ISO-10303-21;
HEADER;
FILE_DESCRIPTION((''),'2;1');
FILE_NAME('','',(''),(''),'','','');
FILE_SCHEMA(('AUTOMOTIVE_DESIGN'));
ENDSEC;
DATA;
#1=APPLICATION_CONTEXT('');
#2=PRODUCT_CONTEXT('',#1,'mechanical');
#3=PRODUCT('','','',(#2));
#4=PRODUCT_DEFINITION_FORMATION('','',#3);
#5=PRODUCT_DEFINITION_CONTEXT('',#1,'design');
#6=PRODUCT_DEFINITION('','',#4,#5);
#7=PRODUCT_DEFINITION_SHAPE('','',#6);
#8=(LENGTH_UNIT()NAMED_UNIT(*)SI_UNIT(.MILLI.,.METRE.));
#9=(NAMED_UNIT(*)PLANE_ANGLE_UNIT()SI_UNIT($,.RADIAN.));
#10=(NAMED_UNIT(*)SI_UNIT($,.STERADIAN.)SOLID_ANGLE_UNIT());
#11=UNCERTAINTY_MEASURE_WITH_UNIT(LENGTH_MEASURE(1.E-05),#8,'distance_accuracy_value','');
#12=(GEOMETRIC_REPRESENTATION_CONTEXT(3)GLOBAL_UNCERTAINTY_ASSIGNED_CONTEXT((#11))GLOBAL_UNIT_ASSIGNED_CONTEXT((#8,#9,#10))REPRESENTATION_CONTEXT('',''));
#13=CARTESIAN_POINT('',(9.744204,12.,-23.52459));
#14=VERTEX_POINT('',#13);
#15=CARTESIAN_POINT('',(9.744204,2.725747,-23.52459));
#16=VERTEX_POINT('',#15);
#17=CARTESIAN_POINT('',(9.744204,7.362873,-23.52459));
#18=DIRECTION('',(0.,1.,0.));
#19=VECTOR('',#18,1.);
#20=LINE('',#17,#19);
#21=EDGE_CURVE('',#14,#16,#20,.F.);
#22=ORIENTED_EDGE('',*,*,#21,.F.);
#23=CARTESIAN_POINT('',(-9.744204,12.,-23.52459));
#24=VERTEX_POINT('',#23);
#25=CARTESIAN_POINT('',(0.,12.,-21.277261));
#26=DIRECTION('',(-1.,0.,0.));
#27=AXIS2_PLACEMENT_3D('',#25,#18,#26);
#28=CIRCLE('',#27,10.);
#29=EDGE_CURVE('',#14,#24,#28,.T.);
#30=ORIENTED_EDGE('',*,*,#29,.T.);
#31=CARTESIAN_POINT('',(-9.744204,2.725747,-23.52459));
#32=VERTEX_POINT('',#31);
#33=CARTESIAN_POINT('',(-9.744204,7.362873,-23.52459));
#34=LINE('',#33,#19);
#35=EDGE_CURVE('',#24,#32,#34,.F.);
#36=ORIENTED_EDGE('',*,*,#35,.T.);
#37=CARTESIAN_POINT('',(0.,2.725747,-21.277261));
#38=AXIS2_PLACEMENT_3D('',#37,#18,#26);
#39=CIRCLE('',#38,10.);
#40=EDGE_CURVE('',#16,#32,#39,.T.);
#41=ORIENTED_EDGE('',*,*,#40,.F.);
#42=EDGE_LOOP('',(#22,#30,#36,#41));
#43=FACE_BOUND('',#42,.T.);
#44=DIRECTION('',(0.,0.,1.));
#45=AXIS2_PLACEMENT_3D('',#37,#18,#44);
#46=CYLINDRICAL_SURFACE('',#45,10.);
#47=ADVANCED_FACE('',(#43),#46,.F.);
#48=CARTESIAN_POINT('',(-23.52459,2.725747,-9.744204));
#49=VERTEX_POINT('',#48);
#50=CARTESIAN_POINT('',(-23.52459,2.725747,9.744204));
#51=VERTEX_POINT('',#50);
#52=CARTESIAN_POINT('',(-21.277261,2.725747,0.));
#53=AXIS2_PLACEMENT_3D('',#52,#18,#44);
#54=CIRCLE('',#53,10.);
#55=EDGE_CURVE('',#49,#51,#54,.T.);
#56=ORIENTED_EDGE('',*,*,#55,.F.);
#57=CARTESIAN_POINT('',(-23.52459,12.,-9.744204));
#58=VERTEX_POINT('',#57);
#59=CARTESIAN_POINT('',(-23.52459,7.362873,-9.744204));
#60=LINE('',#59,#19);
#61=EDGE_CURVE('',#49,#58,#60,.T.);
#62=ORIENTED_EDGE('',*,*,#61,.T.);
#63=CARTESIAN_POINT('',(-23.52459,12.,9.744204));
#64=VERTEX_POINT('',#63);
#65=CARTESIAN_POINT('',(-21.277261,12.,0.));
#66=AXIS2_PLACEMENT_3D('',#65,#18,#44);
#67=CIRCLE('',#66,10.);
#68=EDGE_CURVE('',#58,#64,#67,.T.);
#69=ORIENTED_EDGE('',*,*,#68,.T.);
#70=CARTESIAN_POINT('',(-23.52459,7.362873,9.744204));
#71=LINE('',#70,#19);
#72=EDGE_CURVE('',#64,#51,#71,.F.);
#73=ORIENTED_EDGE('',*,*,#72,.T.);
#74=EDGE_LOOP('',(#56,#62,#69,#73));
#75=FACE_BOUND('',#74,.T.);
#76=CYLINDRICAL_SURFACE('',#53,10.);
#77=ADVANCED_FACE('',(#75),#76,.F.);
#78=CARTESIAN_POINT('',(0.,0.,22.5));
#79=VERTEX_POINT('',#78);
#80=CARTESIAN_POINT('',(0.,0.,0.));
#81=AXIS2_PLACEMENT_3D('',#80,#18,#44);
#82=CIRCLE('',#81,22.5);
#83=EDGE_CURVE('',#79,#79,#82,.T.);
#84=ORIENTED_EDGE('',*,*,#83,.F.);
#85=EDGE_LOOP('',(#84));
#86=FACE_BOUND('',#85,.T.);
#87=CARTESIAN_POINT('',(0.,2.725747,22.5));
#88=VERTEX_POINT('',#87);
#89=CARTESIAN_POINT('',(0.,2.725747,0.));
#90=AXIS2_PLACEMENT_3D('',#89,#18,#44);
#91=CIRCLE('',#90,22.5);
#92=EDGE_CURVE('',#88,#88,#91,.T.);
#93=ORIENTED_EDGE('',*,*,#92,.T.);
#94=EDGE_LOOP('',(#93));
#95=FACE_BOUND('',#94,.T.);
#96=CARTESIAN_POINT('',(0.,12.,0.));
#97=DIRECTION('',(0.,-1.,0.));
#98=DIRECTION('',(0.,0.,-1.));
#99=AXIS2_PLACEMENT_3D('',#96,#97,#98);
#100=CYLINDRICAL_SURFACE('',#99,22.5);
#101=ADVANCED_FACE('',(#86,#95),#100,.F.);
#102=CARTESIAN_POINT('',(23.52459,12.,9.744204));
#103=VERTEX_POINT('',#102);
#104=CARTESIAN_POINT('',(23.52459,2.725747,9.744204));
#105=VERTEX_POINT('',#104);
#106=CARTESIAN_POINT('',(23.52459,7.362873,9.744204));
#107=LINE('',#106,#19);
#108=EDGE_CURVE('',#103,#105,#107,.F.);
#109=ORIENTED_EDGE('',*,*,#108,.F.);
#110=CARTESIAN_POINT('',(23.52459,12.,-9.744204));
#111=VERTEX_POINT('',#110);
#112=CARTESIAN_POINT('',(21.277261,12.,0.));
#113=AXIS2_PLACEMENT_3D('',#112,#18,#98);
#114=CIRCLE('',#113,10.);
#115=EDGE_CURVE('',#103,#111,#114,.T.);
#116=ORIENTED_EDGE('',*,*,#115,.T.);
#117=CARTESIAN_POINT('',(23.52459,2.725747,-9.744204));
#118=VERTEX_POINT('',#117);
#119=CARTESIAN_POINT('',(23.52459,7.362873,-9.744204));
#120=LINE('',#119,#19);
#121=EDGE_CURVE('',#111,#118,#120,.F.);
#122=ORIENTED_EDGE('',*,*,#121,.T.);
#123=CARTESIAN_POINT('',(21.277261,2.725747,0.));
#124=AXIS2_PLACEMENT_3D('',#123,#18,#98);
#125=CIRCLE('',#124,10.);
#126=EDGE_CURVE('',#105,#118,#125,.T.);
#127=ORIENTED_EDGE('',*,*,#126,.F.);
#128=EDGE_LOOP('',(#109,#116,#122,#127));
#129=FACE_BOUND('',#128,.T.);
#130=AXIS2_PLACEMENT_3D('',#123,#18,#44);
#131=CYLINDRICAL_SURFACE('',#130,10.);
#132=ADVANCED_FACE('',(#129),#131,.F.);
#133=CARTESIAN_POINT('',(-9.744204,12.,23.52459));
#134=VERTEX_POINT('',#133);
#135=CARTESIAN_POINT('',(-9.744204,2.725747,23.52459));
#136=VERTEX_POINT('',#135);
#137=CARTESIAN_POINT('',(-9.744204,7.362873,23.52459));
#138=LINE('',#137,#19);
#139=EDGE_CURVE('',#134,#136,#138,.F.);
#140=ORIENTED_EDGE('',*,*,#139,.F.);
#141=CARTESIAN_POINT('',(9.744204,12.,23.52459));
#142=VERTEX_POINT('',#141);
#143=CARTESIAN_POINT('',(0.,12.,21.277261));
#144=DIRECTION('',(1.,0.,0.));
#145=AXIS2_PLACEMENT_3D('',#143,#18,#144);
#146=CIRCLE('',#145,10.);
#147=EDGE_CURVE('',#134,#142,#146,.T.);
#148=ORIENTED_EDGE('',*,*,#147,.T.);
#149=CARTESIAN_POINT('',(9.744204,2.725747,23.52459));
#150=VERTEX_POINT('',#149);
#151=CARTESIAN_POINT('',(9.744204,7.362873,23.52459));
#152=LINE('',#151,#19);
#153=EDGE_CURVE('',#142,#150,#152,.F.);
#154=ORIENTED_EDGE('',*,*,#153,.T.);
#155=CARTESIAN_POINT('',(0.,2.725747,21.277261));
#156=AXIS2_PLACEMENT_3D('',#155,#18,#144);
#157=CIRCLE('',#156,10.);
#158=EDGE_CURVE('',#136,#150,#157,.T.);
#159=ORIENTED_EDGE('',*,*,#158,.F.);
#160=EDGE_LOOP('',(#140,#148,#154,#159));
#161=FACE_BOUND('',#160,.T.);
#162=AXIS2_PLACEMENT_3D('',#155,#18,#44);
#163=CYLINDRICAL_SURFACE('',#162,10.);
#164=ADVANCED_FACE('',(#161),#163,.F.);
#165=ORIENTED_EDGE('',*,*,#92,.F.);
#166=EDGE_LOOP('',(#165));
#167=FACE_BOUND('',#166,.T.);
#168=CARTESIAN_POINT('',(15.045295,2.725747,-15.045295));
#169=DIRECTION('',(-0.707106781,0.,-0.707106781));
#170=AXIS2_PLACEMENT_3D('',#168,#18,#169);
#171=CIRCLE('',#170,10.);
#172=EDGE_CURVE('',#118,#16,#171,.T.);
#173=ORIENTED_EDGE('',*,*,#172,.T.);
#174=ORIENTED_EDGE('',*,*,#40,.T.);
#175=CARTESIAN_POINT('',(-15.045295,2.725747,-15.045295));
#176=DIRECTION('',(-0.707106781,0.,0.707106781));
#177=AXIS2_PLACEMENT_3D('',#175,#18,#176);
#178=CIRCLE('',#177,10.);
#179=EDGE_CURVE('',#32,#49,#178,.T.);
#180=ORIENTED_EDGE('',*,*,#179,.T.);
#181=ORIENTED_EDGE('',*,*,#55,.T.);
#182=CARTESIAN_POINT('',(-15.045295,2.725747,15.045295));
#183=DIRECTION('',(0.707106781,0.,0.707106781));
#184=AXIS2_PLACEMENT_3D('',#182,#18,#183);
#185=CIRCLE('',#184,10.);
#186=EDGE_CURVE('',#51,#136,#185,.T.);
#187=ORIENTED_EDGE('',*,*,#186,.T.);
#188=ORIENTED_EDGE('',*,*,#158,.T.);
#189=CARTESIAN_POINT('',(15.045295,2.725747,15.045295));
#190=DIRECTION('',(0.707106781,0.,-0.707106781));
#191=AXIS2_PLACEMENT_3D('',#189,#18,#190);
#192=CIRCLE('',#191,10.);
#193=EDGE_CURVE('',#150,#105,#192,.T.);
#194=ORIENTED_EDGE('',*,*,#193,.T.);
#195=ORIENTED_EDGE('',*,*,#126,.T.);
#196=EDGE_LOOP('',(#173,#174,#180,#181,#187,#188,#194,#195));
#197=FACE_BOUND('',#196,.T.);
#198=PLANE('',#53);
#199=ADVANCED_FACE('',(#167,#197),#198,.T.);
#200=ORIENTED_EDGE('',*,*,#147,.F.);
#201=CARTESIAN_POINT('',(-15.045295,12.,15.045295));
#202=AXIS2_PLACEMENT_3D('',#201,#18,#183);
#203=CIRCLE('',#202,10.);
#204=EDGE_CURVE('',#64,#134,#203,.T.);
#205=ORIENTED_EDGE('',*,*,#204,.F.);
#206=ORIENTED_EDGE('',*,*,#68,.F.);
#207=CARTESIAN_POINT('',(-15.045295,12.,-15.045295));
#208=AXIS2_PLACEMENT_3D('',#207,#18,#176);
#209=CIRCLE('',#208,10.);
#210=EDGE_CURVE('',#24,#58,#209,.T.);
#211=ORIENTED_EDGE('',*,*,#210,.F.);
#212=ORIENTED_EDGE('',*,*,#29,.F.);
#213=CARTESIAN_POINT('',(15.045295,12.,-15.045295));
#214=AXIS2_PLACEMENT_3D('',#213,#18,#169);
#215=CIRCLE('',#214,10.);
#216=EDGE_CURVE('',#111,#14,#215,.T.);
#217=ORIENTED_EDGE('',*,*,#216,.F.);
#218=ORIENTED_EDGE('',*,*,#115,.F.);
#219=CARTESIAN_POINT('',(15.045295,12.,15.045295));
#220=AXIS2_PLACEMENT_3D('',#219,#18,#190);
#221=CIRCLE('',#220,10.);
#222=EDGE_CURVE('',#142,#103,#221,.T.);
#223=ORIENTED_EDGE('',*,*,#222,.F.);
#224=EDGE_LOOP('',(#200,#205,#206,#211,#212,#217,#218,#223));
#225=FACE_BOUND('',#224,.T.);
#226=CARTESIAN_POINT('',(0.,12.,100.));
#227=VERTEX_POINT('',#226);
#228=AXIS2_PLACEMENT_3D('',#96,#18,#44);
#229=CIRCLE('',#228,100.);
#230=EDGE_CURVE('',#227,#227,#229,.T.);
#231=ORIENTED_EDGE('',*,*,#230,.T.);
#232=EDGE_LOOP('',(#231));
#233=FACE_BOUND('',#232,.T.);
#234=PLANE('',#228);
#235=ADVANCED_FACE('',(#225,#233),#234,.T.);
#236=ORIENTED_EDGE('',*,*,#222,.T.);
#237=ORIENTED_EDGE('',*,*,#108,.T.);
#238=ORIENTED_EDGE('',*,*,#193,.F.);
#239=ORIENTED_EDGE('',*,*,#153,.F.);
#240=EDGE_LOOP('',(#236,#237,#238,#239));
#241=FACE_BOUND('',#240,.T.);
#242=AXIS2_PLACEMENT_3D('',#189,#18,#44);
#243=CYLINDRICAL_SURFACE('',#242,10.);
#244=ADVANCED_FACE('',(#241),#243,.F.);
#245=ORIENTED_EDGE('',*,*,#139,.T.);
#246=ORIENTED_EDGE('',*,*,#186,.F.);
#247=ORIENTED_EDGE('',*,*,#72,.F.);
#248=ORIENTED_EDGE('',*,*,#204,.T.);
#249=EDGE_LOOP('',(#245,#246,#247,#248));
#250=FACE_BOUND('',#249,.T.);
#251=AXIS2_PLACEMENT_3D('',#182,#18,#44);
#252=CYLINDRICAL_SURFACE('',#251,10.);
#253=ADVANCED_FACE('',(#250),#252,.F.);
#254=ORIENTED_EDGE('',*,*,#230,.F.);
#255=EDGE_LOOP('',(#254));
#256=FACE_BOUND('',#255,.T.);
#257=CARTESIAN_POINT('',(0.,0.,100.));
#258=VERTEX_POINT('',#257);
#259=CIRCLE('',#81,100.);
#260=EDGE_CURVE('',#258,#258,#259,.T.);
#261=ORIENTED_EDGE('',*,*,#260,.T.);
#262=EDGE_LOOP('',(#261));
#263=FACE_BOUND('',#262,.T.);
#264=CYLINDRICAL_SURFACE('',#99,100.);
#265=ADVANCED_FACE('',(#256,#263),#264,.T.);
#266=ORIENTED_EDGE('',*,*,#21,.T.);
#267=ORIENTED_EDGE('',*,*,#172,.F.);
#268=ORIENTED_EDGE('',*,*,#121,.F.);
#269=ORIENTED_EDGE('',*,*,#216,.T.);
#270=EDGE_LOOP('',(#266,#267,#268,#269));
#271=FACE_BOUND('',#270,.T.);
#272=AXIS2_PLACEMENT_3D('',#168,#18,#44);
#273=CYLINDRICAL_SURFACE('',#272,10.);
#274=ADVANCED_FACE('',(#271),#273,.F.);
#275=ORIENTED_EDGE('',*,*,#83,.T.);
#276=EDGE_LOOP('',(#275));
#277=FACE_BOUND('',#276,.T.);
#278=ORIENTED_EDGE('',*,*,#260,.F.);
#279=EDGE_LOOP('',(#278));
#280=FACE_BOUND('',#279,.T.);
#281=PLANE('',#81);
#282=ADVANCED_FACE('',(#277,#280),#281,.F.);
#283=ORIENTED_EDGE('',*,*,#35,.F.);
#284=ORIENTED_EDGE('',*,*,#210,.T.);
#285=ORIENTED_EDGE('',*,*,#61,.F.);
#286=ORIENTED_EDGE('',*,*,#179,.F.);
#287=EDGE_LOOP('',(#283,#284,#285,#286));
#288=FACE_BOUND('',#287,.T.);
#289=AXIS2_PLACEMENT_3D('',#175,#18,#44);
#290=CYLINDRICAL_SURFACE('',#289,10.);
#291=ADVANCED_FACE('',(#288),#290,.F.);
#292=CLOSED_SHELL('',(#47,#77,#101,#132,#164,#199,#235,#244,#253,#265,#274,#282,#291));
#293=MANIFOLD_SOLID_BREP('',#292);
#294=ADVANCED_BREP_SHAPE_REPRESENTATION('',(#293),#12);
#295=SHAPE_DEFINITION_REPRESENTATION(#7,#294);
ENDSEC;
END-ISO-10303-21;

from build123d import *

# Parameters (mm, degrees)
SKETCH1_R           = 100
BOSS_EXTRUDE1_DEPTH = 12
SKETCH2_R           = 22.5
CUT_EXTRUDE1_DEPTH  = 142.929559994
SKETCH3_R           = 10
CUT_EXTRUDE2_DEPTH  = 9.274253005
CIRPATTERN1_COUNT   = 8


with BuildPart() as part:
    # Sketch1 → Boss-Extrude1 (new body)
    with BuildSketch(Plane(origin=(0, 0, 0), x_dir=(1, 0, 0), z_dir=(0, 1, 0))):
        Circle(SKETCH1_R)
    extrude(amount=BOSS_EXTRUDE1_DEPTH)

    # Sketch2 → Cut-Extrude1 (cut, through all)
    with BuildSketch(Plane(origin=(0, 0, 0), x_dir=(1, 0, 0), z_dir=(0, 1, 0))):
        Circle(SKETCH2_R)
    extrude(amount=CUT_EXTRUDE1_DEPTH, mode=Mode.SUBTRACT)

    # Sketch3 → Cut-Extrude2 (cut)
    with BuildSketch(Plane(origin=(0, 12, 0), x_dir=(1, 0, 0), z_dir=(0, 1, 0))):
        with Locations((-21.277260677, 0)):
            Circle(SKETCH3_R)
    cut_extrude2 = extrude(amount=-CUT_EXTRUDE2_DEPTH, mode=Mode.SUBTRACT)

    # CirPattern1: Cut-Extrude2 ×8 about axis
    cirpattern1_axis = Axis((0, 0, 0), (0, 1, 0))
    for i in range(1, CIRPATTERN1_COUNT):
        add(cut_extrude2.rotate(cirpattern1_axis, i * 360 / CIRPATTERN1_COUNT), mode=Mode.SUBTRACT)


solid = part.part
